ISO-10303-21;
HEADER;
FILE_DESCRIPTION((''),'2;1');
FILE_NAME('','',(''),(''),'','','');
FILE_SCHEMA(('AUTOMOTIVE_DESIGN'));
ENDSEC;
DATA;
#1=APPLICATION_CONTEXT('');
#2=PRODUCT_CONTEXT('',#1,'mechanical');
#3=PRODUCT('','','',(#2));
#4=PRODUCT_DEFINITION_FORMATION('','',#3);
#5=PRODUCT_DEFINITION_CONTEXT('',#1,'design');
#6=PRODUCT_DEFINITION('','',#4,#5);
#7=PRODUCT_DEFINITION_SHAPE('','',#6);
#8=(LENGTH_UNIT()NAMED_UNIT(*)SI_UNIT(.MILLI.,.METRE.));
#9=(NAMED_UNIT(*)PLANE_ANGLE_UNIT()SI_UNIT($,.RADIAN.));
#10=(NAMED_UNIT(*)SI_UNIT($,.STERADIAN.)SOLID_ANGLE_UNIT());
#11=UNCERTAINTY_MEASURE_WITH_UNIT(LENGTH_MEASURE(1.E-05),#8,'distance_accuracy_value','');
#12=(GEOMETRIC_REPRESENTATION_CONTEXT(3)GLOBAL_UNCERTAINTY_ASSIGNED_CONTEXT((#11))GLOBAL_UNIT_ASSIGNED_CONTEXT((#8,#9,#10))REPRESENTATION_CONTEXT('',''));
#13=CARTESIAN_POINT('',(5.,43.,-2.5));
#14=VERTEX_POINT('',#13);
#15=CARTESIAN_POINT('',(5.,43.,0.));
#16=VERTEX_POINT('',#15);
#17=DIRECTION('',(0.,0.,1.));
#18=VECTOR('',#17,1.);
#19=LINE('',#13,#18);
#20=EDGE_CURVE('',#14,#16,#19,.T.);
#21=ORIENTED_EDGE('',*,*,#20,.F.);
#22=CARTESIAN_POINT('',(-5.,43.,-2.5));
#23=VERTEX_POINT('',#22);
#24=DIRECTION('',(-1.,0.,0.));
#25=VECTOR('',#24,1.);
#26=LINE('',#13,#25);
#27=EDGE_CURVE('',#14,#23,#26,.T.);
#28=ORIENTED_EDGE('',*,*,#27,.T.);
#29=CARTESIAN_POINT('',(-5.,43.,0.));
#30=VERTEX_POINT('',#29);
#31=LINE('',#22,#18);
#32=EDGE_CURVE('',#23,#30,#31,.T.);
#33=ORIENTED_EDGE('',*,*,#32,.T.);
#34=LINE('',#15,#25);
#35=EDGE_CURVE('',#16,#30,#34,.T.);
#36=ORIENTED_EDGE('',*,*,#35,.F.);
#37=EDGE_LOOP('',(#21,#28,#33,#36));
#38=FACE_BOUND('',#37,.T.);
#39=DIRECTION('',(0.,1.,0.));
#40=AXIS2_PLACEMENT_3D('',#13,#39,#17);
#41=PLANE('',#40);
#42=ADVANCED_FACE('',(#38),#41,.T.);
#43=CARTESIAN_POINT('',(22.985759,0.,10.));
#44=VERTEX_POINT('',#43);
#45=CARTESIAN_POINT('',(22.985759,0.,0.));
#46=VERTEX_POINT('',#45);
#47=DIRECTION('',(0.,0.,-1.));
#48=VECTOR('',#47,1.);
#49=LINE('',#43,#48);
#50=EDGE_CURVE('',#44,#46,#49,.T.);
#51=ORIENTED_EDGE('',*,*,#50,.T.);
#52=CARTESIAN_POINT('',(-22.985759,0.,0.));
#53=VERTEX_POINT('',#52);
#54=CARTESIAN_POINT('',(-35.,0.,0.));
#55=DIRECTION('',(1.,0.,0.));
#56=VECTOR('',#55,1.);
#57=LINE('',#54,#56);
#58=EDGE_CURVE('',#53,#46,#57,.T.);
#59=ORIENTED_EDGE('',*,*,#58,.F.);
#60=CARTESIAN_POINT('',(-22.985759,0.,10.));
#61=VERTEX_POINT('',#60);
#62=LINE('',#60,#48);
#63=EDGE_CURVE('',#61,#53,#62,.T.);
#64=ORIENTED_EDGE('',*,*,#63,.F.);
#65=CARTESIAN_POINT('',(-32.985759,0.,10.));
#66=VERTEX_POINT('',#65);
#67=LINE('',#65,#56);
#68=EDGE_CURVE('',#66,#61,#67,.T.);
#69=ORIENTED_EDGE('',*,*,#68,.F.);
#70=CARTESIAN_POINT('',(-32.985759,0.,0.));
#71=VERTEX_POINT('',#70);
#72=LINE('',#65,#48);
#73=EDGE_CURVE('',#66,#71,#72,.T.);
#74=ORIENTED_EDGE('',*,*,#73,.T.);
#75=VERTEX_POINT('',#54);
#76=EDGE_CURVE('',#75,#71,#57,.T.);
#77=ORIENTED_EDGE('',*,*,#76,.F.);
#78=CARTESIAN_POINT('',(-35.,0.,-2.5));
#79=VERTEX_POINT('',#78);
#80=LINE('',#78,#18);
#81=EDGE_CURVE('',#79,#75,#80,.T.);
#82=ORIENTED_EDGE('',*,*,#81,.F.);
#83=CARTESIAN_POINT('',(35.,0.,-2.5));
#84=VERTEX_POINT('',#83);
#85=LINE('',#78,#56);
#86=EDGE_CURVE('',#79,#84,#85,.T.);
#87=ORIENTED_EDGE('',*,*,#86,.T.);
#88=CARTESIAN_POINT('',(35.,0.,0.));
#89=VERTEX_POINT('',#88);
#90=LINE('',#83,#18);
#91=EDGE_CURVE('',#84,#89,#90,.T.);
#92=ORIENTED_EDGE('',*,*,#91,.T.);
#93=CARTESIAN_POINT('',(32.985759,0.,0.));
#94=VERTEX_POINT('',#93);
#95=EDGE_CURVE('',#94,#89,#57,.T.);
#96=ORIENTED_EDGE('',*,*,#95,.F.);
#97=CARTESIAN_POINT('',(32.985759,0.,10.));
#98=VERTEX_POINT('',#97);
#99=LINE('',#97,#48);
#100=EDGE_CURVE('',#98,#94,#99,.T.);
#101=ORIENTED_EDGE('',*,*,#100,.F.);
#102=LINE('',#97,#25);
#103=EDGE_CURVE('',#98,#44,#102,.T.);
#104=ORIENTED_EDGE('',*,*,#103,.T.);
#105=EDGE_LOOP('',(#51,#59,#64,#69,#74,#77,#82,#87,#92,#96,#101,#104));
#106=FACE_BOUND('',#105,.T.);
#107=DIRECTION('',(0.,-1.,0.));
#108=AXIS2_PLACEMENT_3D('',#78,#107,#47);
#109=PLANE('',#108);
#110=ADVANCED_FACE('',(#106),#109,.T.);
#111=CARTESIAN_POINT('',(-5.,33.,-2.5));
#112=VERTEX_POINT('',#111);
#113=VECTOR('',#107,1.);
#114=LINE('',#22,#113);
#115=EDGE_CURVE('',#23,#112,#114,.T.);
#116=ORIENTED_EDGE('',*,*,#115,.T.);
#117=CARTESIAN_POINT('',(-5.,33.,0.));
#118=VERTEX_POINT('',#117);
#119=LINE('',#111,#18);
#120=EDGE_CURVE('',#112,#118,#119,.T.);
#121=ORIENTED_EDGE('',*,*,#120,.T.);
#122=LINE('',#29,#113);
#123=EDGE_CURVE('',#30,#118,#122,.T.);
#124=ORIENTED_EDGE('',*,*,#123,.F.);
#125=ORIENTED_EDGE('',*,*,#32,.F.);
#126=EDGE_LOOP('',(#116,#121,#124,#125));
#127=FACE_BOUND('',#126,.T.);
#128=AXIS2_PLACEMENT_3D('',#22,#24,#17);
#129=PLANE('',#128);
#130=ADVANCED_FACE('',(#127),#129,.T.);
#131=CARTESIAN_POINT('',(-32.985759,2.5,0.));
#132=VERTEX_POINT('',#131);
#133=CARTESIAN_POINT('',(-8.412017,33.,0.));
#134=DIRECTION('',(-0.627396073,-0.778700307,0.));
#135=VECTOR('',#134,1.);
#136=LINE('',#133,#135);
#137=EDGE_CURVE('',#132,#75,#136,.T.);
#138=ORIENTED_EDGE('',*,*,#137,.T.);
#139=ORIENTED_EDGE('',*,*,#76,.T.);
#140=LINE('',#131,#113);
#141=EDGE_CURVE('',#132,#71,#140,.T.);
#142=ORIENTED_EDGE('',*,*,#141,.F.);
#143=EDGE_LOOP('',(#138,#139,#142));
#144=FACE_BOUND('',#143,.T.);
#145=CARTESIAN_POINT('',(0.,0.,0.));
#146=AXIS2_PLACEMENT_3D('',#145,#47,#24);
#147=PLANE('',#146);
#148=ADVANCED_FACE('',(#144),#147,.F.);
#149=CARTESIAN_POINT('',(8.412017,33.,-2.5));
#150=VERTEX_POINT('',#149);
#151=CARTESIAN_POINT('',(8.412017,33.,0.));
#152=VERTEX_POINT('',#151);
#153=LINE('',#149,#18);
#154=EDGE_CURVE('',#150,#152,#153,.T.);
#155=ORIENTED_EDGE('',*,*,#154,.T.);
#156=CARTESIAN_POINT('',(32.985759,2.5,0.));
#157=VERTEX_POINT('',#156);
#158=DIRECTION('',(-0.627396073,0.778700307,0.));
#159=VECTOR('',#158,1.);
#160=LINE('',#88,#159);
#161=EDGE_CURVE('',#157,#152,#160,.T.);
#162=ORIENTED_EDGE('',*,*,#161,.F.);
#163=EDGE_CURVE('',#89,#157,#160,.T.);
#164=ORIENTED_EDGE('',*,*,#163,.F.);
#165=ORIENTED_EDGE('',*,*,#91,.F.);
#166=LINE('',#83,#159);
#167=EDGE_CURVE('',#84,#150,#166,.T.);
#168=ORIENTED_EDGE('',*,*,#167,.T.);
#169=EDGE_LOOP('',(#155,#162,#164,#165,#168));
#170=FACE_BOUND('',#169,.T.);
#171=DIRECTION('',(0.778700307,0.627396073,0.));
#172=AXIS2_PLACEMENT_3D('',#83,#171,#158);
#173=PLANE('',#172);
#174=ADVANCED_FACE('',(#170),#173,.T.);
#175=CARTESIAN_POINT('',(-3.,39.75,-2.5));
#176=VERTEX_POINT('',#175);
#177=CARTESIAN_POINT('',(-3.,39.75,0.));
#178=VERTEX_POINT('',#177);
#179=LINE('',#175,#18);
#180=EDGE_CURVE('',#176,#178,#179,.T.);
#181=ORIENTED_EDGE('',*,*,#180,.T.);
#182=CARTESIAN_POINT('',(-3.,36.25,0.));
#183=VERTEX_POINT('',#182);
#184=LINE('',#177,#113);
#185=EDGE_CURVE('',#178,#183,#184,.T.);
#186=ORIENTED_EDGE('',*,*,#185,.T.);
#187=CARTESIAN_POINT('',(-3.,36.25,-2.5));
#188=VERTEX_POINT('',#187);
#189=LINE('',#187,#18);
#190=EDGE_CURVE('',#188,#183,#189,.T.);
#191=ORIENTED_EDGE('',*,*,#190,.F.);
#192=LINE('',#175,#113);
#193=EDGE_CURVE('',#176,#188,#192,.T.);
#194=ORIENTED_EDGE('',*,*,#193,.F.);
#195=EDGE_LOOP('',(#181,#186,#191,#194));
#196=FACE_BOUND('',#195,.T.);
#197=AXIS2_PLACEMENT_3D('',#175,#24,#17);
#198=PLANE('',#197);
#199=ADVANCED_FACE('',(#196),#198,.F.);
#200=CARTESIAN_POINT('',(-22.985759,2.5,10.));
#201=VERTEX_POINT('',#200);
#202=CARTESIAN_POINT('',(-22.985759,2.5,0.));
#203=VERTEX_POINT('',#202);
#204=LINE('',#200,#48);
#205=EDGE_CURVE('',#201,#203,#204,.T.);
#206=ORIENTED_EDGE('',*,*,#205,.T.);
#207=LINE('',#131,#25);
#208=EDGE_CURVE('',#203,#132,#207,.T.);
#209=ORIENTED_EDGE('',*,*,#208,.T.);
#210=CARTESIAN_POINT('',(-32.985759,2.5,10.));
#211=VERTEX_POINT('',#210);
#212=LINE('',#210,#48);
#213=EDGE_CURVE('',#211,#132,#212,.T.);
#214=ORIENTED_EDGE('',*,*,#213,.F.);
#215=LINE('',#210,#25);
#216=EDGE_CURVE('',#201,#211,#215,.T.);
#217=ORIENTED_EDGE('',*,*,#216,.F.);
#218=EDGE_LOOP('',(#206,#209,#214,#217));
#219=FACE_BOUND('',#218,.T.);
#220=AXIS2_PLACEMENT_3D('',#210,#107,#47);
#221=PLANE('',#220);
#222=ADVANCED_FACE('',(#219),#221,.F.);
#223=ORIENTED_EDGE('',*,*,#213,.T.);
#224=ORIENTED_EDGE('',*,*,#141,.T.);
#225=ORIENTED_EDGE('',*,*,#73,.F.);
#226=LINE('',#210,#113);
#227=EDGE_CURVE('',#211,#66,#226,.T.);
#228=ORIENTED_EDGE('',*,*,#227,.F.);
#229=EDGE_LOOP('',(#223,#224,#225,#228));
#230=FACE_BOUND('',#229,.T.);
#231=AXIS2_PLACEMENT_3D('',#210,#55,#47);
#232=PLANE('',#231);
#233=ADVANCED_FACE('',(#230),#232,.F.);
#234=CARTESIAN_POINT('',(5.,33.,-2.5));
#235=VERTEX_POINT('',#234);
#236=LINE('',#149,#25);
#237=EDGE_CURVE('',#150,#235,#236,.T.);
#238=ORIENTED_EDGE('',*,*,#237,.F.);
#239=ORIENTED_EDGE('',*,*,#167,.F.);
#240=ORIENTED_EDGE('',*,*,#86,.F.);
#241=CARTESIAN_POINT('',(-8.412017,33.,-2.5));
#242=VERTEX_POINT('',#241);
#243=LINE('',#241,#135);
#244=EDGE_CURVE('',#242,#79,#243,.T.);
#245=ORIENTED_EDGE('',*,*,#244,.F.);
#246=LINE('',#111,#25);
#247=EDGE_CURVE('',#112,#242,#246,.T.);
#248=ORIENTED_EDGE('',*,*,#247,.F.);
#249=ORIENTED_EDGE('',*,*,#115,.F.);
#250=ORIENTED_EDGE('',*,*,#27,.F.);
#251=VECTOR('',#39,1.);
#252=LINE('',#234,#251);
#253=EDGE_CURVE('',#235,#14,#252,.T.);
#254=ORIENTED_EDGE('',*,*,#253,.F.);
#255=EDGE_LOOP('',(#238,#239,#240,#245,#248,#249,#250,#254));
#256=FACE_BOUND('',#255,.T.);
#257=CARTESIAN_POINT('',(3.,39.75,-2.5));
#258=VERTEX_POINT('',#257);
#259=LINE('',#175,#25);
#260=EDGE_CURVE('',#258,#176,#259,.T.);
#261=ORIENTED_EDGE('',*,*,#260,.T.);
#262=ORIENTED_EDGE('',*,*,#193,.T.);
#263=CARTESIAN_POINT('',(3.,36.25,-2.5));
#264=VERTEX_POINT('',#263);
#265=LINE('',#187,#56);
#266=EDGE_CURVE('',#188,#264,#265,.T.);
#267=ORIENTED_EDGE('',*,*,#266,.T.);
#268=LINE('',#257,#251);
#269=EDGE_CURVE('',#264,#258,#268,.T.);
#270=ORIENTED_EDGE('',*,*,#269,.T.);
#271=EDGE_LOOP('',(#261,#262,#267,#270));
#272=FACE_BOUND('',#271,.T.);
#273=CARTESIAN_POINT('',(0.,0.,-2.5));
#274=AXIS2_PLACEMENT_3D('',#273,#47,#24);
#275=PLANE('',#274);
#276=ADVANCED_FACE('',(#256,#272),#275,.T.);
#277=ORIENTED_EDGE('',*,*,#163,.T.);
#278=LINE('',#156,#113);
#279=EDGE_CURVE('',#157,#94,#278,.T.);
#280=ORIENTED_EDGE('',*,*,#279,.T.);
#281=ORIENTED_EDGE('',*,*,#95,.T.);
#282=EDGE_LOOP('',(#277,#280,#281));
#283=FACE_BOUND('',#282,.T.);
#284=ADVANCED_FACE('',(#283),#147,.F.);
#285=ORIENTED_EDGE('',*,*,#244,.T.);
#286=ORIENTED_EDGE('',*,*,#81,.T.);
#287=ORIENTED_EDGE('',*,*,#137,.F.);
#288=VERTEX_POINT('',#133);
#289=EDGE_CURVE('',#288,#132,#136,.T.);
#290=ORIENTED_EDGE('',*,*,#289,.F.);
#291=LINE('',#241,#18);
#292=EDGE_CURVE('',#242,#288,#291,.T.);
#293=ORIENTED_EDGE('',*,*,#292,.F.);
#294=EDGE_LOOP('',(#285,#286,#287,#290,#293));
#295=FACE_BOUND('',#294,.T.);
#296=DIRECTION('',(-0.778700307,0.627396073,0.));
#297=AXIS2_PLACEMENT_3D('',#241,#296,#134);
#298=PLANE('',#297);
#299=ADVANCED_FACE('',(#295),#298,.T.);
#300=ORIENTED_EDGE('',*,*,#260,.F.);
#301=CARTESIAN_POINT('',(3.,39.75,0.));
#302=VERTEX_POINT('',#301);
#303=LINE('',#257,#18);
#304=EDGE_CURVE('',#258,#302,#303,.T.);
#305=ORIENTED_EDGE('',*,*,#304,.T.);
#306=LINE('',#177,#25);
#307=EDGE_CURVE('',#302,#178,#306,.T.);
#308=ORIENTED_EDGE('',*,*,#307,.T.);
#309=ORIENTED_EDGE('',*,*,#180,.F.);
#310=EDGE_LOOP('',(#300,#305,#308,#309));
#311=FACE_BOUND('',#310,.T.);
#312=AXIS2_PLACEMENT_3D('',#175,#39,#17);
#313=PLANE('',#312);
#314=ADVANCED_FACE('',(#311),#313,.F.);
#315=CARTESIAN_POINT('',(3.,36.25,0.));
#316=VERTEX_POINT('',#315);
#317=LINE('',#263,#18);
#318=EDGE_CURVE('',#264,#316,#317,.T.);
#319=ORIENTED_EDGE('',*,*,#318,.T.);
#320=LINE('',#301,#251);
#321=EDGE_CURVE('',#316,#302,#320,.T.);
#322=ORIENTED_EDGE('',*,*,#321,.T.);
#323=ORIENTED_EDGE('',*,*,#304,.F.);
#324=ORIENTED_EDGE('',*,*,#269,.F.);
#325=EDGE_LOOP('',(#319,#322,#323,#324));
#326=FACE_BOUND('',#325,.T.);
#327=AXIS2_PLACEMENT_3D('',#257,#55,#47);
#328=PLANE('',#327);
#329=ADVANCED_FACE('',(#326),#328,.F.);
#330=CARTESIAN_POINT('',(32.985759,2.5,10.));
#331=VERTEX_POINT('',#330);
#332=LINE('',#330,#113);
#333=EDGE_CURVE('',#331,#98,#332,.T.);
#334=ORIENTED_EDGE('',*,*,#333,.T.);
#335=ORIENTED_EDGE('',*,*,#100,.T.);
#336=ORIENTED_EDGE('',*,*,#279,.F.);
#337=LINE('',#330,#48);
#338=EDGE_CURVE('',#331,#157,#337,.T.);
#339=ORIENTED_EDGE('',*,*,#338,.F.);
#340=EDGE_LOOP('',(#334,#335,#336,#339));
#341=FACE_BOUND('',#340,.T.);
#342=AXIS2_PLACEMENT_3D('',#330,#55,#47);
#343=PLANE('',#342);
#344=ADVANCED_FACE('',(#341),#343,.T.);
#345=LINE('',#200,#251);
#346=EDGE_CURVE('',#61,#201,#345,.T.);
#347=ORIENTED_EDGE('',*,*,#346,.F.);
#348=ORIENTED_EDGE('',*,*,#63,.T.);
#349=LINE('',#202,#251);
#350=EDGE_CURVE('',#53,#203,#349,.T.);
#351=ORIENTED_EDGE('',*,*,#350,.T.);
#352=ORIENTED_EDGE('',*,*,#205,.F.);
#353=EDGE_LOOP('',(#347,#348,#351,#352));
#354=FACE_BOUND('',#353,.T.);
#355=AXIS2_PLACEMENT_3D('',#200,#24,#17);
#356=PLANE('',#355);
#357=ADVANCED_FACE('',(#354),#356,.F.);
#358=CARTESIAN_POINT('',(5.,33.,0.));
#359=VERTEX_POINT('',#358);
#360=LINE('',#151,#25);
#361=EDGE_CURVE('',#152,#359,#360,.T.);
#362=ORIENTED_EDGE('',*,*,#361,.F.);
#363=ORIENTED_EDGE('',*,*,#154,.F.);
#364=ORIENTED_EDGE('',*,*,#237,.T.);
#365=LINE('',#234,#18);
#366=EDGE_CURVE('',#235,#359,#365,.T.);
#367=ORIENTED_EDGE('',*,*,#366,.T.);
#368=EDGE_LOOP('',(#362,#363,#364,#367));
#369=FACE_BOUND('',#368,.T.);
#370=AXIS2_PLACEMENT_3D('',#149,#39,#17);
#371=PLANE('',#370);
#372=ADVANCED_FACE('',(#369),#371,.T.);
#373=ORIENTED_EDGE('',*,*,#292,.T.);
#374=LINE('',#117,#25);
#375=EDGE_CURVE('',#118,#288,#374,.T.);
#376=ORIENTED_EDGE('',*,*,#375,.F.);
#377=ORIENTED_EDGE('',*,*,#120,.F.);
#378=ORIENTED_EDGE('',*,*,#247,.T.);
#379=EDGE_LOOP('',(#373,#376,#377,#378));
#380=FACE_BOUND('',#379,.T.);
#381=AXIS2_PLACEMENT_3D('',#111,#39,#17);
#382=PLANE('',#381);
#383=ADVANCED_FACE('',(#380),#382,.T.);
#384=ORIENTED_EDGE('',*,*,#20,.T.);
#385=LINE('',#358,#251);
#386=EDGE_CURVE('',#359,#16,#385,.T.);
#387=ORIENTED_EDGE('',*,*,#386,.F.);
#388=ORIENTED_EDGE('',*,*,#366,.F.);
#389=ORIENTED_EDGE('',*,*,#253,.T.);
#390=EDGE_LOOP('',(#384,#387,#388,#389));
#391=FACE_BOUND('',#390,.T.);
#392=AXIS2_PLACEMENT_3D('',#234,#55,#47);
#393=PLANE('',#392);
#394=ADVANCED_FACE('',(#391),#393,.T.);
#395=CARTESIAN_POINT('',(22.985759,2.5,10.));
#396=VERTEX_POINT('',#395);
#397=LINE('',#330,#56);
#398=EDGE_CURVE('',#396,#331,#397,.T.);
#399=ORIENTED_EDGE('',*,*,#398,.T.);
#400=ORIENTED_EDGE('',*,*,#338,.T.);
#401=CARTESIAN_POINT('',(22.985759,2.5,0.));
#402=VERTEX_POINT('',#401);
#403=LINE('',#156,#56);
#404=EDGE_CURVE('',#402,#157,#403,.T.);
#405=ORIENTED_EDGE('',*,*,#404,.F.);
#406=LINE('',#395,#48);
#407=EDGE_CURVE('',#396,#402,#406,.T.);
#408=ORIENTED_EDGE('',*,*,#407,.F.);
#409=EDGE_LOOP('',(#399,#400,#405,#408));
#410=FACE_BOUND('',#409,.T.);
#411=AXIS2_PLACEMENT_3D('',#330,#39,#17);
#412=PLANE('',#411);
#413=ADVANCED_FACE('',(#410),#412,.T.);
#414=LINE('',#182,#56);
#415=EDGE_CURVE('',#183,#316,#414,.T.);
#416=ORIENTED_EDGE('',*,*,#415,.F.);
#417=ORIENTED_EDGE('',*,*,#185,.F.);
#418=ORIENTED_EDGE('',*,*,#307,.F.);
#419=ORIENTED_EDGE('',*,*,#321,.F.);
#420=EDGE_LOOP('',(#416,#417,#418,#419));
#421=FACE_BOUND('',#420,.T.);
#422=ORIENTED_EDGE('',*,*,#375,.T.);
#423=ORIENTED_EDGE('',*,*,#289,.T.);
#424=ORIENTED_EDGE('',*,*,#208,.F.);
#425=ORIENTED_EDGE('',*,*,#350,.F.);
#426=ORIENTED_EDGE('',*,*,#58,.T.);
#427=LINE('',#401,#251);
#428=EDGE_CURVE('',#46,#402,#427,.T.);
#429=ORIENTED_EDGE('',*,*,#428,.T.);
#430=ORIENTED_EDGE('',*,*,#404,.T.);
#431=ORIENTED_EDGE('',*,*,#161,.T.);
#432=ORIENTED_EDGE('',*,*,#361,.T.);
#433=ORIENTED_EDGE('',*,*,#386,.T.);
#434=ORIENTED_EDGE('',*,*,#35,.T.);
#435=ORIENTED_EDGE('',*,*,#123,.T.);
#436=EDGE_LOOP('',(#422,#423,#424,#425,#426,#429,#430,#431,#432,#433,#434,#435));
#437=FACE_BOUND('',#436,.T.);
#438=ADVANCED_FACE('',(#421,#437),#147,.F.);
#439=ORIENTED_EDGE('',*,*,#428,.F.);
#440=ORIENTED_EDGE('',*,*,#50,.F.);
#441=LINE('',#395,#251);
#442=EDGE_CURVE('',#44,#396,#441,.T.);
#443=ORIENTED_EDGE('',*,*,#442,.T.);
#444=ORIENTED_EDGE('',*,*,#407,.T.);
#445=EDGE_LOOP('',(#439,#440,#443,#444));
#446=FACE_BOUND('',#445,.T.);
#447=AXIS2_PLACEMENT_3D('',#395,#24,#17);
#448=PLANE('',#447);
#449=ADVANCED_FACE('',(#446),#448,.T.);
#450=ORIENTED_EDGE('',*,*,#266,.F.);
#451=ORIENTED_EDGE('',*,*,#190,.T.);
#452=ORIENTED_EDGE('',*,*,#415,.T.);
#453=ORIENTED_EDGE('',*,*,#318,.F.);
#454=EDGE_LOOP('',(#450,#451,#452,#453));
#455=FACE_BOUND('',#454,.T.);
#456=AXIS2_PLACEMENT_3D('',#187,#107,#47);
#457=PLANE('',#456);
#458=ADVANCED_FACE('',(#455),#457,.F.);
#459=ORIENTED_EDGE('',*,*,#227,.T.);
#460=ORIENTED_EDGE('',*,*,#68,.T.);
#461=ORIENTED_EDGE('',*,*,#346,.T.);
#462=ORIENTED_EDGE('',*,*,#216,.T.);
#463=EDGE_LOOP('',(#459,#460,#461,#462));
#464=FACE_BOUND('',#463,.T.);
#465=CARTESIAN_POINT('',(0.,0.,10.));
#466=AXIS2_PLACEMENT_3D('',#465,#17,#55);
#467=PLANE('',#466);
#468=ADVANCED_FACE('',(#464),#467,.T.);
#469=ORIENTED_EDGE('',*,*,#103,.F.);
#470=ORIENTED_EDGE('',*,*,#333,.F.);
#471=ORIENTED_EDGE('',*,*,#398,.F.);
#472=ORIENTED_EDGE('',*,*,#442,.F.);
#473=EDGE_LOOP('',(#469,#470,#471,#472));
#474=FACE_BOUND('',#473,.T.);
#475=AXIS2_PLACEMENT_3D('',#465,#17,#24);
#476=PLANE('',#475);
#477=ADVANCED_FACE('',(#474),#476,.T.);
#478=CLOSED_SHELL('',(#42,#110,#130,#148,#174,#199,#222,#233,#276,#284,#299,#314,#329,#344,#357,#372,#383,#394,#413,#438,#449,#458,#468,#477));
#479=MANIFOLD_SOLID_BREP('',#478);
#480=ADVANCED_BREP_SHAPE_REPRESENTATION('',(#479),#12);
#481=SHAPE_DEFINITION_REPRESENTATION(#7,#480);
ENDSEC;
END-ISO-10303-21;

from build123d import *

# Parameters (mm, degrees)
BASE_FLANGE1_DEPTH  = 2.5
SKETCH6_W           = 6
SKETCH6_H           = 3.5
CUT_EXTRUDE1_DEPTH  = 10
SKETCH7_W           = 10
SKETCH7_H           = 2.5
BOSS_EXTRUDE1_DEPTH = 10


# Sheet-metal steps are written as plain solids
with BuildPart() as part:
    # Sketch1 → Base-Flange1 (new body)
    with BuildSketch(Plane.XY):
        Polygon((-35, 0), (35, 0), (8.412017167, 33), (5, 33), (5, 43), (-5, 43), (-5, 33), (-8.412017167, 33), align=None)
    extrude(amount=-BASE_FLANGE1_DEPTH)

    # Sketch6 → Cut-Extrude1 (cut)
    with BuildSketch(Plane.XY):
        with Locations((0, 38)):
            Rectangle(SKETCH6_W, SKETCH6_H)
    extrude(amount=-CUT_EXTRUDE1_DEPTH, mode=Mode.SUBTRACT)

    # Sketch7 → Boss-Extrude1 (add)
    with BuildSketch(Plane.XY):
        with Locations((-27.985758876, 1.25)):
            Rectangle(SKETCH7_W, SKETCH7_H)
    boss_extrude1 = extrude(amount=BOSS_EXTRUDE1_DEPTH)

    # Mirror1: Boss-Extrude1 across plane
    add(boss_extrude1.mirror(Plane(origin=(0, 0, 0), x_dir=(0, 0, 1), z_dir=(1, 0, 0))))


solid = part.part
